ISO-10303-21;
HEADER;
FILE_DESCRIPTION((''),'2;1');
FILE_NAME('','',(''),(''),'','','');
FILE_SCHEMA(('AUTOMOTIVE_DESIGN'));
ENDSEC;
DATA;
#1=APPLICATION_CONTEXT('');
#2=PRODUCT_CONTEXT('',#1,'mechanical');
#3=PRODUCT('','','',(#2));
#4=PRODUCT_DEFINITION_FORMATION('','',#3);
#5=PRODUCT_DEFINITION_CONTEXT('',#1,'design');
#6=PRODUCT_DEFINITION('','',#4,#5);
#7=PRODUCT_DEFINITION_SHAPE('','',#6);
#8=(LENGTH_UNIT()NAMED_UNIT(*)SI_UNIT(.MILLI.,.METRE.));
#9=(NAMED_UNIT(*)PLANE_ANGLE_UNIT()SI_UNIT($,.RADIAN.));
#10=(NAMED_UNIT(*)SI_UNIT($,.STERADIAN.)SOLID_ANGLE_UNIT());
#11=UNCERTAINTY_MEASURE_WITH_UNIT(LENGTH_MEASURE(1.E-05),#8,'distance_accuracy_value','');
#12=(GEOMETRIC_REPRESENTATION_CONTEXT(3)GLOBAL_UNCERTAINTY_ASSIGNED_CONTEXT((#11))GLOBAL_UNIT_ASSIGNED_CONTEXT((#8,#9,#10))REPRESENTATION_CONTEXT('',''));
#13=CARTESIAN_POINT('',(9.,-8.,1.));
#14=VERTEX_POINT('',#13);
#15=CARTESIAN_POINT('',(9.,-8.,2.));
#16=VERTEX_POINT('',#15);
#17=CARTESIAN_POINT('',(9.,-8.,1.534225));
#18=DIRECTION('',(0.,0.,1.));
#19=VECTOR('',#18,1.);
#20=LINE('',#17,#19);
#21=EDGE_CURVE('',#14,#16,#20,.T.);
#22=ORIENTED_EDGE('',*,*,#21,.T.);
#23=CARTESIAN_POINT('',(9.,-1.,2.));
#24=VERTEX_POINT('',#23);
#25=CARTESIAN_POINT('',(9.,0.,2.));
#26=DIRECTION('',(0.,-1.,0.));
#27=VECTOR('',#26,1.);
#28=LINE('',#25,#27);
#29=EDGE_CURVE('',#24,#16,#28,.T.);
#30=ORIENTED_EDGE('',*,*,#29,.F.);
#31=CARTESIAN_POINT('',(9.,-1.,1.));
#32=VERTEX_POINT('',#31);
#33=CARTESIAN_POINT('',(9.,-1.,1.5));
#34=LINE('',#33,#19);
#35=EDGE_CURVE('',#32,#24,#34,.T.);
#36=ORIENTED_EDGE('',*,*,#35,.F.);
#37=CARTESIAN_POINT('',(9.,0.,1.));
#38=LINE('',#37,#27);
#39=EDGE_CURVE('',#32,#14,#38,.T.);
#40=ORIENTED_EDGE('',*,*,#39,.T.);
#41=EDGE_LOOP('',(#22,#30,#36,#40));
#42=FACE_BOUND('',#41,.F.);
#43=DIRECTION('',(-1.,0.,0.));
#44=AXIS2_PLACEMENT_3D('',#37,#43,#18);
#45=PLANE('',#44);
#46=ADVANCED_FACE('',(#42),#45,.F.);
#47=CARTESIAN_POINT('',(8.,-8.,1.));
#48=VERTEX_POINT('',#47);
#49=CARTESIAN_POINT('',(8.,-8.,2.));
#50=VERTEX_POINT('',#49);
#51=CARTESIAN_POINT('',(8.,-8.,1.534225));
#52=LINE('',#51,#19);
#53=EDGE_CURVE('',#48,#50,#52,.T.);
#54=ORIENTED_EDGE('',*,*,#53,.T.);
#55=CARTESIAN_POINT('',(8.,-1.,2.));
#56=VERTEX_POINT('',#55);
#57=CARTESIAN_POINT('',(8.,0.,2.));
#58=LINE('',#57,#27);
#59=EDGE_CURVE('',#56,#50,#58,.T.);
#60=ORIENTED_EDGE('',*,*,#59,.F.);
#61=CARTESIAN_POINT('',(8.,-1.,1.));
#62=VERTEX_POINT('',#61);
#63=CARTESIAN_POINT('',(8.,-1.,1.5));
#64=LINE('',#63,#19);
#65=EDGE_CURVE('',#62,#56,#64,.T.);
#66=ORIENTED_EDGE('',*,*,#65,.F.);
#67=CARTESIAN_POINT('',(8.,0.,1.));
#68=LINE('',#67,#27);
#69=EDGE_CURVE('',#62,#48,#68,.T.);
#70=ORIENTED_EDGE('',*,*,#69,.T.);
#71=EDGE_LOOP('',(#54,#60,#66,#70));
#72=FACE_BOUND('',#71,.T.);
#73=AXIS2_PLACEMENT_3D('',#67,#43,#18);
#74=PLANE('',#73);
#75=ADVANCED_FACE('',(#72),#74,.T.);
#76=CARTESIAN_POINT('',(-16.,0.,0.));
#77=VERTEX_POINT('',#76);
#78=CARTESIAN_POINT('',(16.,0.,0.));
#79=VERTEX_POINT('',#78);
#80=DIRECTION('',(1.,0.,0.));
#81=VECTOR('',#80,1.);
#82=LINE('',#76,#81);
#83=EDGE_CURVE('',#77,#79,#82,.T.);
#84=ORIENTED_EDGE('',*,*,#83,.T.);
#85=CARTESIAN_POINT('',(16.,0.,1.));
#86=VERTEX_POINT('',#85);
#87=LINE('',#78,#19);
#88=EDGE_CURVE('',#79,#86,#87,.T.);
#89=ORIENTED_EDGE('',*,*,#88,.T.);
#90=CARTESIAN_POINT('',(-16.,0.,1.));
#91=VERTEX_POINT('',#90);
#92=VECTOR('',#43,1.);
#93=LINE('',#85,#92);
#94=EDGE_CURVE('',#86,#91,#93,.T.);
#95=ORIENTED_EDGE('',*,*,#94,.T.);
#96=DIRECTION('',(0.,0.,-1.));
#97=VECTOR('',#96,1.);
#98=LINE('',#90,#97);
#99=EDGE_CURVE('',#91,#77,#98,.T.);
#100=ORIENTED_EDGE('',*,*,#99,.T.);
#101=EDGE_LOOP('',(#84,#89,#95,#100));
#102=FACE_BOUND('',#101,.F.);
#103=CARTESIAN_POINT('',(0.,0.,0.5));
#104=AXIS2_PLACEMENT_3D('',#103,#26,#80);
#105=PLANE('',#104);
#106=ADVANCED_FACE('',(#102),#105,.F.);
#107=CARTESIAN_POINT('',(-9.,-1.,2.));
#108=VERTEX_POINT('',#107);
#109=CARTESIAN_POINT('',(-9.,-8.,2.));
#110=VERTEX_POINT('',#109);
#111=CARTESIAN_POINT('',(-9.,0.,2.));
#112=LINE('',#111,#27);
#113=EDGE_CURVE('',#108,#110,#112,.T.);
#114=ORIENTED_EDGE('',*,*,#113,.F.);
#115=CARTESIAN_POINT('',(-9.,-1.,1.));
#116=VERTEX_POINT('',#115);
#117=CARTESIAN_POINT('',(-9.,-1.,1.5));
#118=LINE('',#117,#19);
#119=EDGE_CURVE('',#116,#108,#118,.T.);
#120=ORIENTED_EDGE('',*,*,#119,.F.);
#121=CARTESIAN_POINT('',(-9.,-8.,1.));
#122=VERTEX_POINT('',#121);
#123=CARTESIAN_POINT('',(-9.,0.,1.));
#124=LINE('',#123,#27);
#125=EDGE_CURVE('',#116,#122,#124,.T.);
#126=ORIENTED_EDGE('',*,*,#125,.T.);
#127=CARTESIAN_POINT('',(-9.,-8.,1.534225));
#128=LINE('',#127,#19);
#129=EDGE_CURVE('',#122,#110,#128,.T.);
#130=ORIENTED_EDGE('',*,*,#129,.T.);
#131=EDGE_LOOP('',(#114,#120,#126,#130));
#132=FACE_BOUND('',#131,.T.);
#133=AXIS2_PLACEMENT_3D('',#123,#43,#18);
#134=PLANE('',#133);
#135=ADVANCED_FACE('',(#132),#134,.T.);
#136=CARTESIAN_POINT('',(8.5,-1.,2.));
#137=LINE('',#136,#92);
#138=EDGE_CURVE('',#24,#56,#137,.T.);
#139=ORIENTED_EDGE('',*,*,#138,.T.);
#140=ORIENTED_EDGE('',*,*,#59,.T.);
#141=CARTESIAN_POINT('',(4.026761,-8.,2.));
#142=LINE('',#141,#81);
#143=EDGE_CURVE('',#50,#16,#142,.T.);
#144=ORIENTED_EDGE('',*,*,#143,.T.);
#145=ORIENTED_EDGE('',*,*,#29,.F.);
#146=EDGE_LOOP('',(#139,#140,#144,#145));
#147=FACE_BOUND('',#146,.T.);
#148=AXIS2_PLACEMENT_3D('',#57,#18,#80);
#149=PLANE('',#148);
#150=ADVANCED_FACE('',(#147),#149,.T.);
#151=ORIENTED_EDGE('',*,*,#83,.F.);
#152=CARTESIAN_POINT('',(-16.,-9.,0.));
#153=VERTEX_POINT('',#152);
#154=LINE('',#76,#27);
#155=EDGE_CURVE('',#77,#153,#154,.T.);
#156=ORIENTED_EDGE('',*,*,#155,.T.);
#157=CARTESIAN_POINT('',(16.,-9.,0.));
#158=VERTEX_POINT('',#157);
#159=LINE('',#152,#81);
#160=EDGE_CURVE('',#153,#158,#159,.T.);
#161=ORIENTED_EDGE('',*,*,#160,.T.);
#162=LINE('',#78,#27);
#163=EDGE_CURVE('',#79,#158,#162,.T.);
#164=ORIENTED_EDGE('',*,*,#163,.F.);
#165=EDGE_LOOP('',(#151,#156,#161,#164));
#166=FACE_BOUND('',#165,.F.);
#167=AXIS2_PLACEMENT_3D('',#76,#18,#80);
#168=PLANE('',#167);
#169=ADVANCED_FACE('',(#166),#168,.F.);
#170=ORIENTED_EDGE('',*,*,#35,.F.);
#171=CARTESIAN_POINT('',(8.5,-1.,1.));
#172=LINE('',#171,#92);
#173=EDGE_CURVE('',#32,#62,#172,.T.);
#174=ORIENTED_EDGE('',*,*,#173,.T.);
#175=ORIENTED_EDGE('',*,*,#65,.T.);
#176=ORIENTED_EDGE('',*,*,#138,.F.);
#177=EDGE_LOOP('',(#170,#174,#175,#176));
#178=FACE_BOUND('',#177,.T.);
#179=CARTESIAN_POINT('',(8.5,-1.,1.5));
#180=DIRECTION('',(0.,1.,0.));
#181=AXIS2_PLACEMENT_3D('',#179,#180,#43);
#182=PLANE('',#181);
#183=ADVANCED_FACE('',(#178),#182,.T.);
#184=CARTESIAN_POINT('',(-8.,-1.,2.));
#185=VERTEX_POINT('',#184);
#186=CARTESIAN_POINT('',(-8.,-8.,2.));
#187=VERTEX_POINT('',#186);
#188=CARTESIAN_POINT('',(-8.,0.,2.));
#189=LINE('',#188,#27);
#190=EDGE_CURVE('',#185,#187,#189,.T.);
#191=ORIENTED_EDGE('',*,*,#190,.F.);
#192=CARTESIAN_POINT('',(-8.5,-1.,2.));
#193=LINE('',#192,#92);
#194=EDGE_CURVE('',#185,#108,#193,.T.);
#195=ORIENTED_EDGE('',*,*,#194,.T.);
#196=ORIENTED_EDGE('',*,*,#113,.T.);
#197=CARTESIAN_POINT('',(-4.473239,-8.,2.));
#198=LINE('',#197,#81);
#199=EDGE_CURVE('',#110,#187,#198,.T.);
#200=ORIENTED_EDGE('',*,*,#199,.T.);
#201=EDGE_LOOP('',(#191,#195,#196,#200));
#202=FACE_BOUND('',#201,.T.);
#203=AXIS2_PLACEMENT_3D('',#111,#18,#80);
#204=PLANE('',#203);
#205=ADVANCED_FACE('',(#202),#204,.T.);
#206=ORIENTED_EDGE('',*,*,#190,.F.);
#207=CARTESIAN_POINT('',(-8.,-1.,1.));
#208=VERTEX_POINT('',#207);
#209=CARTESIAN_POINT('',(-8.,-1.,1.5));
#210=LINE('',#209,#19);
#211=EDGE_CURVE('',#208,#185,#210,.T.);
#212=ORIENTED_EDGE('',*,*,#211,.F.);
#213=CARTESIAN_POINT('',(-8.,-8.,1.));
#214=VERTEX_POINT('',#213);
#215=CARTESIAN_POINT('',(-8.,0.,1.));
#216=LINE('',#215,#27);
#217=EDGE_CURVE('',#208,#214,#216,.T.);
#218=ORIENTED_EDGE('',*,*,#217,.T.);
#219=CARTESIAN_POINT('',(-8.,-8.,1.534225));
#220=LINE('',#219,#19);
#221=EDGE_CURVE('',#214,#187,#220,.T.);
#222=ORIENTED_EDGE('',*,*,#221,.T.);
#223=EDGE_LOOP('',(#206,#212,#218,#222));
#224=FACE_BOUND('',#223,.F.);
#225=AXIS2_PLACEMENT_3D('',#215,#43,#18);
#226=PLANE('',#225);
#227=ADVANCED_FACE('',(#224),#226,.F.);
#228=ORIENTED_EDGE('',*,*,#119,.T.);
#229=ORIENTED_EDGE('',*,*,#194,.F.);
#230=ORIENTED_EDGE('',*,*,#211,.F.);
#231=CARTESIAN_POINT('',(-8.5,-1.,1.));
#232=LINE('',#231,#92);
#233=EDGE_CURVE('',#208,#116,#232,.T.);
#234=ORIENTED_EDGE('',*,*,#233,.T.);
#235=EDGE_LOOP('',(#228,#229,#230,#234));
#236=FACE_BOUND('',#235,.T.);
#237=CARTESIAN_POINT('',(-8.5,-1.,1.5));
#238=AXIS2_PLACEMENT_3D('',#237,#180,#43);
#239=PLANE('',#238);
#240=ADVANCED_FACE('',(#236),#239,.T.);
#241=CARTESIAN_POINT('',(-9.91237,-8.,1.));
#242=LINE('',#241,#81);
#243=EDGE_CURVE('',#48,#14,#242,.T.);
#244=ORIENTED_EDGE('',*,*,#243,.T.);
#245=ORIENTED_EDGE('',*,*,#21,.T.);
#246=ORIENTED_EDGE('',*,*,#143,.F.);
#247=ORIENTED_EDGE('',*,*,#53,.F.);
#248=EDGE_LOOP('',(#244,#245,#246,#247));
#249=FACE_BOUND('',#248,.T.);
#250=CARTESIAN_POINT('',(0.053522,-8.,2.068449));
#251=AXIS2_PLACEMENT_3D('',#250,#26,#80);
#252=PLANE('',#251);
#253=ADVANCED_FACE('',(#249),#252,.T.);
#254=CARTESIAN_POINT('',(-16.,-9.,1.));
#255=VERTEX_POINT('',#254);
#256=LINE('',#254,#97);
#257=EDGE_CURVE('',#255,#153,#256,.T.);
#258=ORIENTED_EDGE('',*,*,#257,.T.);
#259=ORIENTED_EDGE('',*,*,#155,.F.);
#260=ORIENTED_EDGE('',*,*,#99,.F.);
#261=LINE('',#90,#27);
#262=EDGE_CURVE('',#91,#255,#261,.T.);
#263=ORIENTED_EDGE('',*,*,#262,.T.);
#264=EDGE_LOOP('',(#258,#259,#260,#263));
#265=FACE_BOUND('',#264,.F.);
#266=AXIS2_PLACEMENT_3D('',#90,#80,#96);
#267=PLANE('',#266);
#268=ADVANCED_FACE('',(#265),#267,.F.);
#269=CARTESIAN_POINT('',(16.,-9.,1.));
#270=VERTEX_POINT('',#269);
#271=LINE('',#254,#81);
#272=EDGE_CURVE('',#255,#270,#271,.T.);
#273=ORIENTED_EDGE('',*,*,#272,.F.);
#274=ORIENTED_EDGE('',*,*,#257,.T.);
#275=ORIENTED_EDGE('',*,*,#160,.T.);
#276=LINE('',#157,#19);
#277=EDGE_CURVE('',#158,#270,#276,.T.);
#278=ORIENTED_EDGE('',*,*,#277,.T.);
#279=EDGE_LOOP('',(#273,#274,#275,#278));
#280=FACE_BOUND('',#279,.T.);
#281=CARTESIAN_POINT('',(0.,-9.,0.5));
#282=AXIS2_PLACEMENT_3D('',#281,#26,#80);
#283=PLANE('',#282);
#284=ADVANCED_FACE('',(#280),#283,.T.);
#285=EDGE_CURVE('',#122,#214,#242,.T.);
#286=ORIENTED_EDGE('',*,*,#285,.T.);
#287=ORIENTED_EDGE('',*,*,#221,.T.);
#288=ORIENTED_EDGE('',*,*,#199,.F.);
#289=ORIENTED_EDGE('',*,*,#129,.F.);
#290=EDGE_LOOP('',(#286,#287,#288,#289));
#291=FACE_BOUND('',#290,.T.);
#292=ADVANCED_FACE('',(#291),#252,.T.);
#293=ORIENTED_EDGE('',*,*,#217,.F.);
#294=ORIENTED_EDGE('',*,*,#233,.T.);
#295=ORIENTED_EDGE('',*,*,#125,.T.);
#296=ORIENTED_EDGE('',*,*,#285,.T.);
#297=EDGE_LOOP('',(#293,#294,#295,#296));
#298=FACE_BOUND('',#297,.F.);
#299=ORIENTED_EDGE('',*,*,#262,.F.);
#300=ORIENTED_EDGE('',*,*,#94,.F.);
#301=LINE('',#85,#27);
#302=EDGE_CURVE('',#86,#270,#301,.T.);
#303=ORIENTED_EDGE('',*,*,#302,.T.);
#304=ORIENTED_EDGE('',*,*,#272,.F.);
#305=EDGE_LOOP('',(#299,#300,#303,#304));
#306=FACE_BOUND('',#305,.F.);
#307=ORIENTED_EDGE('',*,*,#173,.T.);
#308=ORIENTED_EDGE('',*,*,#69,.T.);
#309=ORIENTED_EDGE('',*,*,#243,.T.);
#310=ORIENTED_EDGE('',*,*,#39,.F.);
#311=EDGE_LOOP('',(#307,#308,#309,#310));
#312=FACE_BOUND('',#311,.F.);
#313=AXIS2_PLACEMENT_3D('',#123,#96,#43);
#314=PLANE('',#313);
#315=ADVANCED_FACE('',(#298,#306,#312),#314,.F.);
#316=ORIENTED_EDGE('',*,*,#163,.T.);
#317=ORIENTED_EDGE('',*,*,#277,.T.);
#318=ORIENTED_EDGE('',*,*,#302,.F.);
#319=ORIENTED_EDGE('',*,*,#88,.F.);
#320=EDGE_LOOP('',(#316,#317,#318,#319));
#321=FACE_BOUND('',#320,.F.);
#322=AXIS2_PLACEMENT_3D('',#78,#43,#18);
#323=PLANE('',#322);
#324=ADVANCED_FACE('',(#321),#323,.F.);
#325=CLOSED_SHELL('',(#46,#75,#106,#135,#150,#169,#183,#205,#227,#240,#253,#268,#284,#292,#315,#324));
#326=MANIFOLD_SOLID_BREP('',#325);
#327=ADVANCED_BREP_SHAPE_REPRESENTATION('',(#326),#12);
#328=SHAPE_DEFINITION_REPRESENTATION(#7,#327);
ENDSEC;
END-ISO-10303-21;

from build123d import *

# Parameters (mm, degrees)
F0_W     = 1
F0_H     = 1
F1_DEPTH = 9
F2_W     = 1
F2_H     = 1
F3_DEPTH = 1
F4_W     = 1
F4_H     = 1
F5_DEPTH = 1


with BuildPart() as f1:
    # F0 (on Front) → F1 (new body)
    with BuildSketch(Plane.XZ):
        Polygon((-9, 1), (-16, 1), (-16, 0), (16, 0), (16, 1), (9, 1), (8, 1), (-8, 1), align=None)
        with Locations((-8.5, 1.5)):
            Rectangle(F0_W, F0_H)
        with Locations((8.5, 1.5)):
            Rectangle(F0_W, F0_H)
    extrude(amount=F1_DEPTH)

    # F2 (on face) → F3 (cut)
    with BuildSketch(Plane.XZ.offset(9)):
        Polygon((-9.9123697728, 3.1492931303), (-9.9123697728, 1), (-9, 1), (-9, 2), (-8, 2), (-8, 1), (8, 1), (8, 2), (9, 2), (9, 1), (10.0291045383, 1), (10.0291045383, 3.1492931303), align=None)
        with Locations((-8.5, 1.5)):
            Rectangle(F2_W, F2_H)
        with Locations((8.5, 1.5)):
            Rectangle(F2_W, F2_H)
    extrude(amount=-F3_DEPTH, mode=Mode.SUBTRACT)

    # F4 (on face) → F5 (cut)
    with BuildSketch(Plane(origin=(0, 0, 0), x_dir=(-1, 0, 0), z_dir=(0, 1, 0))):
        with Locations((-8.5, 1.5)):
            Rectangle(F4_W, F4_H)
        with Locations((8.5, 1.5)):
            Rectangle(F4_W, F4_H)
    extrude(amount=-F5_DEPTH, mode=Mode.SUBTRACT)


solid = f1.part
